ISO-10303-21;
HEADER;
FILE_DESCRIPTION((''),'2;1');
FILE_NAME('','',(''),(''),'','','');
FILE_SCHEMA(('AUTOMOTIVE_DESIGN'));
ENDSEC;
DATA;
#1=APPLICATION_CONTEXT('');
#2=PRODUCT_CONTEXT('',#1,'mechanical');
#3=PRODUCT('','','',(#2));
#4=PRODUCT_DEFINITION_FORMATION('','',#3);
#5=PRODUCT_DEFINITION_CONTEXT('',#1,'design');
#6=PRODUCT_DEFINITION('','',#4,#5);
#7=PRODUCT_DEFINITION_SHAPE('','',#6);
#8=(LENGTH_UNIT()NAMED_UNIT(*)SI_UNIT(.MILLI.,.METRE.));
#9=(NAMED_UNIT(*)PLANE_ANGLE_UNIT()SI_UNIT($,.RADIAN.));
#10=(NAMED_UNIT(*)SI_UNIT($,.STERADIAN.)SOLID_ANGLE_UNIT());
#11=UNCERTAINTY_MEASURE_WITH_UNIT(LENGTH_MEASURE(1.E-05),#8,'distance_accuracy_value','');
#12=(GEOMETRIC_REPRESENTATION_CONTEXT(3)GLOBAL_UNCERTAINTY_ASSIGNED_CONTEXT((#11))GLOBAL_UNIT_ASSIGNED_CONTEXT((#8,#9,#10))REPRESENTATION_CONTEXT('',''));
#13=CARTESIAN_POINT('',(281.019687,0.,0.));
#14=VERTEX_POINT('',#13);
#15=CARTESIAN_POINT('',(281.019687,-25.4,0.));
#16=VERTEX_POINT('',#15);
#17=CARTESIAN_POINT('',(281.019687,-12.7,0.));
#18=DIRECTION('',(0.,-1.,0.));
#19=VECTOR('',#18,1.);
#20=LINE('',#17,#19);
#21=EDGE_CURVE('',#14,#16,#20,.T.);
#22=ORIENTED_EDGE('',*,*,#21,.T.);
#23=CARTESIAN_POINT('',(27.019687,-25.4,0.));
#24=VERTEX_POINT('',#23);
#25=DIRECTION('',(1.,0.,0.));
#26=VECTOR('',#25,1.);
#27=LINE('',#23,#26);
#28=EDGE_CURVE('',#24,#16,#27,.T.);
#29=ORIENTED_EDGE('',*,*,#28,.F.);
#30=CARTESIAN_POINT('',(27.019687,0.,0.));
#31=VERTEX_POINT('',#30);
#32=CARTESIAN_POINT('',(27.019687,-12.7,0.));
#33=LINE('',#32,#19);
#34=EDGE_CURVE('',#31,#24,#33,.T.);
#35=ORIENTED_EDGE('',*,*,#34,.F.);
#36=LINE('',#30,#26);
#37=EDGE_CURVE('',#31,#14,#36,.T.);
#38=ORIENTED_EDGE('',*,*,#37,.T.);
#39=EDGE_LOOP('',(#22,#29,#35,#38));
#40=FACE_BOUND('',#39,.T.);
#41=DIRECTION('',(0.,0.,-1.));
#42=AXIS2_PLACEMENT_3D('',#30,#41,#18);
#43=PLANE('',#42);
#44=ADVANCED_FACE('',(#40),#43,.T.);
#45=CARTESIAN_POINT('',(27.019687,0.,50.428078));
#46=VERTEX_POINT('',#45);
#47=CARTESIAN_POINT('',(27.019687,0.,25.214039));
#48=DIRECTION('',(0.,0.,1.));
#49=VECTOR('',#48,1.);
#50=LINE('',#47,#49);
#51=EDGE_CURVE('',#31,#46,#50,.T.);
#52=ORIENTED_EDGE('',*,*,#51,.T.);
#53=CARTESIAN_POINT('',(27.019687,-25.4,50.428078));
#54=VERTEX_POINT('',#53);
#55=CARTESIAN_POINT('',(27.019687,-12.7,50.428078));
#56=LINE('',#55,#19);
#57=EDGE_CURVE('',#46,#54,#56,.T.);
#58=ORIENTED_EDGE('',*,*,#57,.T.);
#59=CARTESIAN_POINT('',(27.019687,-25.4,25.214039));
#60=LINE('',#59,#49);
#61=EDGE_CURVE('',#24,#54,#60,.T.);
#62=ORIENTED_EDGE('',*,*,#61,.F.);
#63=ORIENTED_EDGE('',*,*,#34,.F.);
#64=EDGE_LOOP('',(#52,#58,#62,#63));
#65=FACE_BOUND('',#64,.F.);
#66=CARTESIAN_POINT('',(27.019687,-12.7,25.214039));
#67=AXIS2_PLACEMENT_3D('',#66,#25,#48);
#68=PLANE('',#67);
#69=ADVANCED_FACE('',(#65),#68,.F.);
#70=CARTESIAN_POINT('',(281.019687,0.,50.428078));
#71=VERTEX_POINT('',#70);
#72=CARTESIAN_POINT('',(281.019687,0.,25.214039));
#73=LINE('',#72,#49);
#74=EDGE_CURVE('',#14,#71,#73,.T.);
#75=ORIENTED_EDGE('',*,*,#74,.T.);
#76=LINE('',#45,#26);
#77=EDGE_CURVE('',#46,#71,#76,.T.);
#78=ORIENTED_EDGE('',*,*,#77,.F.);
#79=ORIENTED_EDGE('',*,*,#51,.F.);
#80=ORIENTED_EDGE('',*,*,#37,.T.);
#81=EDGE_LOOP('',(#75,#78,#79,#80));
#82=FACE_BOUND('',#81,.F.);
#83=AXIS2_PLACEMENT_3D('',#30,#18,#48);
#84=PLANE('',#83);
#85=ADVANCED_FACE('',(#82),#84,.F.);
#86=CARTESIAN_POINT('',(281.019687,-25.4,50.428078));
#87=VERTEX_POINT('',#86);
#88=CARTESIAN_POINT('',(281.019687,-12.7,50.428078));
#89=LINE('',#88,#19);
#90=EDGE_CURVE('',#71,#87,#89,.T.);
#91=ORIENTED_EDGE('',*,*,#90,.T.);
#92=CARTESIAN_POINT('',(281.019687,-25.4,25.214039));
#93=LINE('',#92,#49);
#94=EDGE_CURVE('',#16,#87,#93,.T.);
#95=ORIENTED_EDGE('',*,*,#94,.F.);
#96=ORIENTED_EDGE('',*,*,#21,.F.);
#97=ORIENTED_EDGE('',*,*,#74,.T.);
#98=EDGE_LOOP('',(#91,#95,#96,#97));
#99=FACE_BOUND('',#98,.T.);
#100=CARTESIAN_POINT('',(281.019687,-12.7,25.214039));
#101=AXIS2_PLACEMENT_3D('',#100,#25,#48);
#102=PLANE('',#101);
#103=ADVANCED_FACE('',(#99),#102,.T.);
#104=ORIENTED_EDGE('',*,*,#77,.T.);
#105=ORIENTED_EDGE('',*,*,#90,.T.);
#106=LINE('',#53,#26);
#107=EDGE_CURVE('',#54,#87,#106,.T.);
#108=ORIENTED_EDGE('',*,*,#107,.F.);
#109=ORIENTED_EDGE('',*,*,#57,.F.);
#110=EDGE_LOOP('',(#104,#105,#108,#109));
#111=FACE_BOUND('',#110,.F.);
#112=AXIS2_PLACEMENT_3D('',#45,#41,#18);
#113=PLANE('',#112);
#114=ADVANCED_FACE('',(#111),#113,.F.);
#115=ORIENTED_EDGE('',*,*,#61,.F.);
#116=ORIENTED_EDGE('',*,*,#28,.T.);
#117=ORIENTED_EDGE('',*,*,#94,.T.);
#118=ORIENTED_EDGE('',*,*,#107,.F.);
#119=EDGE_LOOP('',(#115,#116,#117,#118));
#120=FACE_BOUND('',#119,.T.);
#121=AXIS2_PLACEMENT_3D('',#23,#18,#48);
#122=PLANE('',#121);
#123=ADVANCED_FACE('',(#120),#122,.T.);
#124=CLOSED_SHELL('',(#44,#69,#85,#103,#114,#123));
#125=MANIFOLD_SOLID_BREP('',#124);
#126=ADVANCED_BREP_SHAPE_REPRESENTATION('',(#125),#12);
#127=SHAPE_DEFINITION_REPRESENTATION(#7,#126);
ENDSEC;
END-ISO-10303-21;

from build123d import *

# Parameters (mm, degrees)
F1_E1_RIGHT_W = 50.4280775785
F1_E1_RIGHT_H = 25.4
F2_DEPTH      = 254


with BuildPart() as f2:
    # F1_E1_right (on explicit) → F2 (new body)
    with BuildSketch(Plane(origin=(27.0196869969, 0, 0), x_dir=(0, 0, 1), z_dir=(1, 0, 0))):
        with Locations((25.2140387893, 12.7)):
            Rectangle(F1_E1_RIGHT_W, F1_E1_RIGHT_H)
    extrude(amount=F2_DEPTH)


solid = f2.part
